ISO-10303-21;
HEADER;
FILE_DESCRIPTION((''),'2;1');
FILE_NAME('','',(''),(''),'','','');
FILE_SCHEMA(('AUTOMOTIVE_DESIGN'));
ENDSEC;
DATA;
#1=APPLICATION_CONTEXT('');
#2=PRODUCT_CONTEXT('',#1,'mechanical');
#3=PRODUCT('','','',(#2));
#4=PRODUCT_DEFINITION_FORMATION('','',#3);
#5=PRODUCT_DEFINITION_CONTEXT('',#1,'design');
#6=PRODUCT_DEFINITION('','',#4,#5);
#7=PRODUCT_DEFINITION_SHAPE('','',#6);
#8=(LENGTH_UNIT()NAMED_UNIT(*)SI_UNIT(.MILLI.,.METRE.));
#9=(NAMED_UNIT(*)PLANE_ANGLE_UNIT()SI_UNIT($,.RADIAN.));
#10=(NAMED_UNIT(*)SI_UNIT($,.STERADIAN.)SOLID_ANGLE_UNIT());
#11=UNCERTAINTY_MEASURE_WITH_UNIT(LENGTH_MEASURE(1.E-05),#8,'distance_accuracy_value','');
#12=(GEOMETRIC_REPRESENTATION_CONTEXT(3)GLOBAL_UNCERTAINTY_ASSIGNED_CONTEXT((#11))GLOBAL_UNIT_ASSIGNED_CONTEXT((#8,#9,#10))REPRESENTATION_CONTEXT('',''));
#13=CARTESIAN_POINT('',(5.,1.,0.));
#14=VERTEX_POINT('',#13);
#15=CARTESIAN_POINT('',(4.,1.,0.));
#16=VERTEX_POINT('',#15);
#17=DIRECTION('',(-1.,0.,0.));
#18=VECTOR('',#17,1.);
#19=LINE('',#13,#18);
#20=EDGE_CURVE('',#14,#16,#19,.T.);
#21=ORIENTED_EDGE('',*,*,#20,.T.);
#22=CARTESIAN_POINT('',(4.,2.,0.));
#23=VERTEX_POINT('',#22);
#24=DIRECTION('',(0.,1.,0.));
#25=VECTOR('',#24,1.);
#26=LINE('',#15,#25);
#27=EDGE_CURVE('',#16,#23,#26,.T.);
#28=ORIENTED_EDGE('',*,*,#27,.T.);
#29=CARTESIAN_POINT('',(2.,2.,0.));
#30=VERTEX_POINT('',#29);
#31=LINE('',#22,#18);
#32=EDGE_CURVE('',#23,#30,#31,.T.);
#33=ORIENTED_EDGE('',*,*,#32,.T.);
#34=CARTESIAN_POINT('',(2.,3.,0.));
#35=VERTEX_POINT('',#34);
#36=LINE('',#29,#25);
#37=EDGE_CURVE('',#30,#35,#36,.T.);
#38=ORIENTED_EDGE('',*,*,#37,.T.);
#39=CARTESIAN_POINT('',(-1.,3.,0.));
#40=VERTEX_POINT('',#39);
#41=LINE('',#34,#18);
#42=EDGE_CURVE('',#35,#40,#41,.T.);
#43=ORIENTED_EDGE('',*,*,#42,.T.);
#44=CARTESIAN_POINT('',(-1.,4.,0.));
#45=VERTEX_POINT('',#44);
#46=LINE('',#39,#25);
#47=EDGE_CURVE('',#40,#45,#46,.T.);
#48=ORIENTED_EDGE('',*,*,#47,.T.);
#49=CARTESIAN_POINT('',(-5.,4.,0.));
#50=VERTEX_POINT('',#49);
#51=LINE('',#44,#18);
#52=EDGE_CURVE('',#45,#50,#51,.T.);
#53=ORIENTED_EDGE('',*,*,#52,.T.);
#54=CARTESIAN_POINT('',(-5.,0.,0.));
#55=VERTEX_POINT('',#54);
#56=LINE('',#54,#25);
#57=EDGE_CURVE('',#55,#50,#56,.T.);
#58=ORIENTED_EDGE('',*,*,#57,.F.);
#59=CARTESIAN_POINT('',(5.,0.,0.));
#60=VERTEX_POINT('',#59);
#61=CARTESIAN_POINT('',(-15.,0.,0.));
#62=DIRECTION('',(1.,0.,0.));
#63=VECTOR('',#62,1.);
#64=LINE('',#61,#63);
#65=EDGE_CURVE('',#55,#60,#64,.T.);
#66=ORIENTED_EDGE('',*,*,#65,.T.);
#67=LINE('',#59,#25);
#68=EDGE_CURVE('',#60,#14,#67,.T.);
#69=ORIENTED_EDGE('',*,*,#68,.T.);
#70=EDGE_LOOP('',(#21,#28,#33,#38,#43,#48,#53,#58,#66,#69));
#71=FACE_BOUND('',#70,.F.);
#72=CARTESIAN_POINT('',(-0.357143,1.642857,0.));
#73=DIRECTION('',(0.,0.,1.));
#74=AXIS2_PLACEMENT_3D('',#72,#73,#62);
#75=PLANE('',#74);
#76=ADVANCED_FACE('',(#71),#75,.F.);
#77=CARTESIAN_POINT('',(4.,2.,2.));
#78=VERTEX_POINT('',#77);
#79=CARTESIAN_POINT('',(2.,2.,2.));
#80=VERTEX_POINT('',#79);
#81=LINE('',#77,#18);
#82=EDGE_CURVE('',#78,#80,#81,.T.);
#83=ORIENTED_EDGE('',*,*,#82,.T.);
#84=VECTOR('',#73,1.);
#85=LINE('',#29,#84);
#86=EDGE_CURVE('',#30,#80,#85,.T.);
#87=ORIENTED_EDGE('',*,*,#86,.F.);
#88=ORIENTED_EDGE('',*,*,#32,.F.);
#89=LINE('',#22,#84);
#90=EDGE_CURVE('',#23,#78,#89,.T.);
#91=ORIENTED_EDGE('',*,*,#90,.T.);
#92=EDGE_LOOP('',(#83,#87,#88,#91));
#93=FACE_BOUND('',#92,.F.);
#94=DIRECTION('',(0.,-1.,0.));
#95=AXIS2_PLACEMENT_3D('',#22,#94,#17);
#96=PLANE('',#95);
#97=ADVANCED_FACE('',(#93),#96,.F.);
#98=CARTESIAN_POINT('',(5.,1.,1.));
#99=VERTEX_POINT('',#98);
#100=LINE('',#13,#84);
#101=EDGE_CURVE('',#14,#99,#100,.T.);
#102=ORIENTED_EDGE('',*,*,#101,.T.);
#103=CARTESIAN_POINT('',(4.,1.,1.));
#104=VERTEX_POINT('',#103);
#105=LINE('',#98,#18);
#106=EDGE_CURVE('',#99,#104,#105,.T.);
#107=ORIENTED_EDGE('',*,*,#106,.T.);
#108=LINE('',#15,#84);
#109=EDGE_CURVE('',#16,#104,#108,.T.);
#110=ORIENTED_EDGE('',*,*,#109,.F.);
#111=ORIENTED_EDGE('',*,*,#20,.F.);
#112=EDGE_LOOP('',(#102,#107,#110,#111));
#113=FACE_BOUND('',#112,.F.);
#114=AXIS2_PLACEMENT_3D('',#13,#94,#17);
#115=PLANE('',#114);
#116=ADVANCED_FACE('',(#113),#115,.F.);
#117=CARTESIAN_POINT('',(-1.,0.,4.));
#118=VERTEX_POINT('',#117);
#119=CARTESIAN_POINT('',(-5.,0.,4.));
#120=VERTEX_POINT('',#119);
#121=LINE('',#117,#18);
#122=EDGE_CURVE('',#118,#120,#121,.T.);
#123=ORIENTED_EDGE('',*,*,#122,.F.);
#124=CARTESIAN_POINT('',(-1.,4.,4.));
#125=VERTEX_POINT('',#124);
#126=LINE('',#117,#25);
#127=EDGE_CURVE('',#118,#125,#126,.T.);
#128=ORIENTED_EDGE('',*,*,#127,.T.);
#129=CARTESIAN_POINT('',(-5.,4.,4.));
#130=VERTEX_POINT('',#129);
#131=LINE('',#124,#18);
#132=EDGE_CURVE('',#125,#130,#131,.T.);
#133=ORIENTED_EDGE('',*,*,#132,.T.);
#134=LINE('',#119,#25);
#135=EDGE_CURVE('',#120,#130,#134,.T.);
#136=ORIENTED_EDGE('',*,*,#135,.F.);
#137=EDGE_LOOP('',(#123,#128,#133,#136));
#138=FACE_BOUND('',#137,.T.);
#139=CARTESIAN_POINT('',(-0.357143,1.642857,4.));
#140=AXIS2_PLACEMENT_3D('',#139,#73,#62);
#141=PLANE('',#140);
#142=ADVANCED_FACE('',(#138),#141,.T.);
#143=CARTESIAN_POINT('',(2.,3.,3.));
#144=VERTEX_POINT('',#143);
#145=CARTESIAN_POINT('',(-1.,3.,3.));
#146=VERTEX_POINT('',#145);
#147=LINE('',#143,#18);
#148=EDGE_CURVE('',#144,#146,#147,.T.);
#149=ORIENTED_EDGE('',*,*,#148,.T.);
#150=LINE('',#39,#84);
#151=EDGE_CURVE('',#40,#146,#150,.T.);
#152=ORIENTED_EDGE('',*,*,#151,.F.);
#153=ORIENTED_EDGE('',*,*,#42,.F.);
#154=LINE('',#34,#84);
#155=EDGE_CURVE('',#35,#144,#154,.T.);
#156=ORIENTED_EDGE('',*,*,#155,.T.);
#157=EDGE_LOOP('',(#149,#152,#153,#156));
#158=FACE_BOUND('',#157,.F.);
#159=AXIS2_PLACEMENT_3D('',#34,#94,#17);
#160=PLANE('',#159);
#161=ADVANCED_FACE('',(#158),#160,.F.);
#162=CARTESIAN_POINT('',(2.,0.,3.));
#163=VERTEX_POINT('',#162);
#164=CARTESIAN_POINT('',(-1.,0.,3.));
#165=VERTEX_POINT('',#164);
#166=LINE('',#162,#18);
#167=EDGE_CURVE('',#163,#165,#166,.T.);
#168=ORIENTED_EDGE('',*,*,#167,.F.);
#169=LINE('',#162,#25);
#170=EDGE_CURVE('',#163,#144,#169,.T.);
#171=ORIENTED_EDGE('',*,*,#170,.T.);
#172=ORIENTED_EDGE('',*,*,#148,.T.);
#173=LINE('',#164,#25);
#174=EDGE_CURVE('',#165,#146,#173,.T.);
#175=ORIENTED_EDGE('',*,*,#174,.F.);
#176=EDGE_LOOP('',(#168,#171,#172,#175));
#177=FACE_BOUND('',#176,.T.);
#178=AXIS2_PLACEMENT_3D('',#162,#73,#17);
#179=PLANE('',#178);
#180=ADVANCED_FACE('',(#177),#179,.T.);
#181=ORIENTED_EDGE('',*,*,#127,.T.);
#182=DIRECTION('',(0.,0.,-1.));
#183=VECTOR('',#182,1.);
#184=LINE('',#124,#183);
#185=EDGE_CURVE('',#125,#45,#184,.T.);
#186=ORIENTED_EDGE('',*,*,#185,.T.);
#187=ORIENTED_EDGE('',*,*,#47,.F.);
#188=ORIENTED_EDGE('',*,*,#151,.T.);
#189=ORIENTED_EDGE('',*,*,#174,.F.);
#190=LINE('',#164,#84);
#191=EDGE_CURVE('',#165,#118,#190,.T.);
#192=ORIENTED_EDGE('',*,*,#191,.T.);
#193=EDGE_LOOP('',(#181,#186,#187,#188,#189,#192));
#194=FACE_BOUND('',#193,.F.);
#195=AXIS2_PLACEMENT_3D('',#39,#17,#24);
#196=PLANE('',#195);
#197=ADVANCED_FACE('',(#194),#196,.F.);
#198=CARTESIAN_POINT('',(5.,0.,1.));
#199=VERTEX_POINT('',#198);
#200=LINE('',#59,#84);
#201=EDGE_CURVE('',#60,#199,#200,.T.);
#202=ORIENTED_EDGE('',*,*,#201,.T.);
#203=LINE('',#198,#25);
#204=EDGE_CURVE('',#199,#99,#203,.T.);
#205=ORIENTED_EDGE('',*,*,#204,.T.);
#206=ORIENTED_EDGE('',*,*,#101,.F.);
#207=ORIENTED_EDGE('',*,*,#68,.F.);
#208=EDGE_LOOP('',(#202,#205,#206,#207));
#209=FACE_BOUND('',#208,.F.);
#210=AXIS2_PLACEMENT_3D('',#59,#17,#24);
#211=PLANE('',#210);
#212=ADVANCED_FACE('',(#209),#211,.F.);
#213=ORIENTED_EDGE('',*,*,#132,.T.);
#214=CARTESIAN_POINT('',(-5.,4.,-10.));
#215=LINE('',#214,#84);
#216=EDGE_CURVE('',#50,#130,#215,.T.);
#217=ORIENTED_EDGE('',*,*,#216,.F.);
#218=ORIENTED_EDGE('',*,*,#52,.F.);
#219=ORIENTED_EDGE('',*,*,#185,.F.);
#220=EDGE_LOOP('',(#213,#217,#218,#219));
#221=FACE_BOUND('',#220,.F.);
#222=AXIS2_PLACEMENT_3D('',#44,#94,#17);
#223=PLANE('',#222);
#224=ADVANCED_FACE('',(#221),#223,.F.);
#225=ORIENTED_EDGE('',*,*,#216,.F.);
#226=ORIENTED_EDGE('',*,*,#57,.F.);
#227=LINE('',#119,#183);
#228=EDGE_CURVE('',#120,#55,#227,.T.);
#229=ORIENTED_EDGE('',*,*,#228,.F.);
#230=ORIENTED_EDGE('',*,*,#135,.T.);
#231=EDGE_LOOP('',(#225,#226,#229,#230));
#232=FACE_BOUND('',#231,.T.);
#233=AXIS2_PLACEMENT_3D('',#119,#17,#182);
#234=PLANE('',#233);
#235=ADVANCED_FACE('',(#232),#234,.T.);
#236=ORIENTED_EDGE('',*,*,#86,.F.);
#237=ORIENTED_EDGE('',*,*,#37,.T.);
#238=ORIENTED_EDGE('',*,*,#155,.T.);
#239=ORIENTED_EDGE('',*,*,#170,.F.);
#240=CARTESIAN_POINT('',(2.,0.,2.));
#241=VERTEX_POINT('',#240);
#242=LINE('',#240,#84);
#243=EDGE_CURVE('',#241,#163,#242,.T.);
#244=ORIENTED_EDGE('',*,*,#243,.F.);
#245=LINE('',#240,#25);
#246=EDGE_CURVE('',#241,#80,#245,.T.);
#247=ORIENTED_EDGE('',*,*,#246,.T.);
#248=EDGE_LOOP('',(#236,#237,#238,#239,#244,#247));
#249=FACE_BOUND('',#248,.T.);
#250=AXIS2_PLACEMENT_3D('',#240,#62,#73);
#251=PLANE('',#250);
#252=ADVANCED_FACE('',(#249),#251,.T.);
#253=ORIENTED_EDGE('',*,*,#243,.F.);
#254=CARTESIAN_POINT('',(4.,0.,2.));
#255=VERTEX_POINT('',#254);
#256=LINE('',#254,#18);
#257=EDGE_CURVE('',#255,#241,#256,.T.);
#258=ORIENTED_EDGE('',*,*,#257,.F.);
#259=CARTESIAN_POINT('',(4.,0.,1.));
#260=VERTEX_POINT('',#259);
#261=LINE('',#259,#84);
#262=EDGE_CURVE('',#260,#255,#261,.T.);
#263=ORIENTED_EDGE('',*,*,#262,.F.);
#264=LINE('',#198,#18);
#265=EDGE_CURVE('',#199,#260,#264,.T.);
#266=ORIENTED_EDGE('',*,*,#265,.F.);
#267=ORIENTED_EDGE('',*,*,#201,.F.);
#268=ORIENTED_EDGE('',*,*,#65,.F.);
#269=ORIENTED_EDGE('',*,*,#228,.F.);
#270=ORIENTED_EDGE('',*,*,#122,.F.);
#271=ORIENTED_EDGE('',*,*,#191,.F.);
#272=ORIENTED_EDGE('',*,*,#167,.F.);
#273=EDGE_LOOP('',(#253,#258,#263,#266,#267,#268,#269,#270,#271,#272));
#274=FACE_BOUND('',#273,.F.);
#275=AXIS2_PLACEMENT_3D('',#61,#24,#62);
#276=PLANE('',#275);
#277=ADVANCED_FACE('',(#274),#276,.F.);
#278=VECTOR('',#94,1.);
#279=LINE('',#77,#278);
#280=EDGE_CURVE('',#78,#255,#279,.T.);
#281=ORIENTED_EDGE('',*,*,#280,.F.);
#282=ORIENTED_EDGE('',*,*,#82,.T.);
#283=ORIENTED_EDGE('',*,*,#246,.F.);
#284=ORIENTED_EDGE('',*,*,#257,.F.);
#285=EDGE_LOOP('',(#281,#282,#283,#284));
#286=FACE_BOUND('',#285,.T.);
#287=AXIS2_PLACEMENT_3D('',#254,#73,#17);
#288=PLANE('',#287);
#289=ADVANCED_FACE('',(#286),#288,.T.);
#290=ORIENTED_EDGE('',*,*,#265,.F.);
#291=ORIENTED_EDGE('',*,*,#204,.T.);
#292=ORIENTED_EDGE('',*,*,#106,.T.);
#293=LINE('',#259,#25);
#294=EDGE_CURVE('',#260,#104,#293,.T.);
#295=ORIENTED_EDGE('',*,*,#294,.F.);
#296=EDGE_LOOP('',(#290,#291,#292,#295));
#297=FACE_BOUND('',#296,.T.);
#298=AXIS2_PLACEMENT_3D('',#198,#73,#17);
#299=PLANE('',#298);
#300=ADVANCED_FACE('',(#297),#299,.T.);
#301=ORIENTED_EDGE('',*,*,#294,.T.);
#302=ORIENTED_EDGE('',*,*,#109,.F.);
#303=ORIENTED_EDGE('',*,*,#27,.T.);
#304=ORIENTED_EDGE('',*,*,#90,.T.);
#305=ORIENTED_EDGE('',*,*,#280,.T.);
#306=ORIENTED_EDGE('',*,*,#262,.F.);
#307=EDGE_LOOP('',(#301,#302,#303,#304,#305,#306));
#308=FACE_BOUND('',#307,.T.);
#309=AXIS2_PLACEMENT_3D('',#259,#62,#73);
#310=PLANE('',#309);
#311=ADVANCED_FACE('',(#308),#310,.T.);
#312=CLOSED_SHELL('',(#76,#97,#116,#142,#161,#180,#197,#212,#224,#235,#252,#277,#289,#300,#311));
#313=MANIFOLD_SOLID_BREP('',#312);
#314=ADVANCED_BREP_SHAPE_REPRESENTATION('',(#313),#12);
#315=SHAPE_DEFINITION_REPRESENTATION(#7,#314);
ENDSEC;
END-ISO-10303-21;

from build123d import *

# Parameters (mm, degrees)
F1_DEPTH    = 4
F2_T4_DEPTH = 24
F3_T4_DEPTH = 19
F4_T4_DEPTH = 14
F5_R        = 0.99999
F7_DEPTH    = 25


# Not quite as in the source:
# - a fillet or chamfer that OpenCascade refuses, or shapes differently, is made with other operations: its cross-section is extruded or revolved along the edge and cut away or added
# - a fillet or chamfer is up to 0.001 mm smaller than in the source, because OpenCascade refuses the exact size


with BuildPart() as f1:
    # F0 (on Top) → F1 (new body)
    with BuildSketch(Plane.XY):
        Polygon((4, 0), (5, 0), (5, 1), (4, 1), (4, 2), (2, 2), (2, 3), (-1, 3), (-1, 4), (-5, 4), (-5, 0), align=None)
        Polygon((-14, 0), (-5, 0), (-5, 4), (-9, 4), (-9, 3), (-12, 3), (-12, 2), (-14, 2), (-14, 1), (-15, 1), (-15, 0), align=None)
    extrude(amount=F1_DEPTH)

    # F2: fillet of radius 4 on 1 edges, made by hand


with BuildPart() as f2_tool2:
    # F2_s3 → F2_t4 (new body)
    with BuildSketch(Plane.XY.offset(-10)):
        with BuildLine():
            ThreePointArc((-5, 4), (-7.8284271247, 2.8284271247), (-9, 0))
            Line((-9, 0), (-9, 4))
            Line((-9, 4), (-5, 4))
        make_face()
    extrude(amount=F2_T4_DEPTH)

    split(bisect_by=Plane.XZ.offset(-3), keep=Keep.BOTTOM)


with BuildPart() as f1_1:
    add(f1.part)

    # F2_t1: cut F2_tool2
    add(f2_tool2.part, mode=Mode.SUBTRACT)

    # F3: fillet of radius 3 on 1 edges, made by hand


with BuildPart() as f3_tool2:
    # F3_s3 → F3_t4 (new body)
    with BuildSketch(Plane.XY.offset(-7.5)):
        with BuildLine():
            ThreePointArc((-12, 0), (-11.1213203436, 2.1213203436), (-9, 3))
            Line((-9, 3), (-12, 3))
            Line((-12, 3), (-12, 0))
        make_face()
    extrude(amount=F3_T4_DEPTH)

    split(bisect_by=Plane.XZ.offset(-2), keep=Keep.BOTTOM)


with BuildPart() as f1_2:
    add(f1_1.part)

    # F3_t1: cut F3_tool2
    add(f3_tool2.part, mode=Mode.SUBTRACT)

    # F4: fillet of radius 2 on 1 edges, made by hand


with BuildPart() as f4_tool2:
    # F4_s3 → F4_t4 (new body)
    with BuildSketch(Plane.XY.offset(-5)):
        with BuildLine():
            ThreePointArc((-14, 0), (-13.4142135624, 1.4142135624), (-12, 2))
            Line((-12, 2), (-14, 2))
            Line((-14, 2), (-14, 0))
        make_face()
    extrude(amount=F4_T4_DEPTH)

    split(bisect_by=Plane.XZ.offset(-1), keep=Keep.BOTTOM)


with BuildPart() as f1_3:
    add(f1_2.part)

    # F4_t1: cut F4_tool2
    add(f4_tool2.part, mode=Mode.SUBTRACT)

    # F5 (radius 1 in the source; OpenCascade refuses exactly that, so slightly less here)
    f5_edges = [f1_3.edges().sort_by_distance(p)[0] for p in [
        (-15, 1, 2),
    ]]
    fillet(f5_edges, radius=F5_R)

    # F6 (on face) → F7 (intersect)
    with BuildSketch(Plane.XZ):
        Polygon((-5, 0), (5, 0), (5, 1), (4, 1), (4, 2), (2, 2), (2, 3), (-1, 3), (-1, 4), (-5, 4), align=None)
    extrude(amount=-F7_DEPTH, mode=Mode.INTERSECT)


solid = f1_3.part
